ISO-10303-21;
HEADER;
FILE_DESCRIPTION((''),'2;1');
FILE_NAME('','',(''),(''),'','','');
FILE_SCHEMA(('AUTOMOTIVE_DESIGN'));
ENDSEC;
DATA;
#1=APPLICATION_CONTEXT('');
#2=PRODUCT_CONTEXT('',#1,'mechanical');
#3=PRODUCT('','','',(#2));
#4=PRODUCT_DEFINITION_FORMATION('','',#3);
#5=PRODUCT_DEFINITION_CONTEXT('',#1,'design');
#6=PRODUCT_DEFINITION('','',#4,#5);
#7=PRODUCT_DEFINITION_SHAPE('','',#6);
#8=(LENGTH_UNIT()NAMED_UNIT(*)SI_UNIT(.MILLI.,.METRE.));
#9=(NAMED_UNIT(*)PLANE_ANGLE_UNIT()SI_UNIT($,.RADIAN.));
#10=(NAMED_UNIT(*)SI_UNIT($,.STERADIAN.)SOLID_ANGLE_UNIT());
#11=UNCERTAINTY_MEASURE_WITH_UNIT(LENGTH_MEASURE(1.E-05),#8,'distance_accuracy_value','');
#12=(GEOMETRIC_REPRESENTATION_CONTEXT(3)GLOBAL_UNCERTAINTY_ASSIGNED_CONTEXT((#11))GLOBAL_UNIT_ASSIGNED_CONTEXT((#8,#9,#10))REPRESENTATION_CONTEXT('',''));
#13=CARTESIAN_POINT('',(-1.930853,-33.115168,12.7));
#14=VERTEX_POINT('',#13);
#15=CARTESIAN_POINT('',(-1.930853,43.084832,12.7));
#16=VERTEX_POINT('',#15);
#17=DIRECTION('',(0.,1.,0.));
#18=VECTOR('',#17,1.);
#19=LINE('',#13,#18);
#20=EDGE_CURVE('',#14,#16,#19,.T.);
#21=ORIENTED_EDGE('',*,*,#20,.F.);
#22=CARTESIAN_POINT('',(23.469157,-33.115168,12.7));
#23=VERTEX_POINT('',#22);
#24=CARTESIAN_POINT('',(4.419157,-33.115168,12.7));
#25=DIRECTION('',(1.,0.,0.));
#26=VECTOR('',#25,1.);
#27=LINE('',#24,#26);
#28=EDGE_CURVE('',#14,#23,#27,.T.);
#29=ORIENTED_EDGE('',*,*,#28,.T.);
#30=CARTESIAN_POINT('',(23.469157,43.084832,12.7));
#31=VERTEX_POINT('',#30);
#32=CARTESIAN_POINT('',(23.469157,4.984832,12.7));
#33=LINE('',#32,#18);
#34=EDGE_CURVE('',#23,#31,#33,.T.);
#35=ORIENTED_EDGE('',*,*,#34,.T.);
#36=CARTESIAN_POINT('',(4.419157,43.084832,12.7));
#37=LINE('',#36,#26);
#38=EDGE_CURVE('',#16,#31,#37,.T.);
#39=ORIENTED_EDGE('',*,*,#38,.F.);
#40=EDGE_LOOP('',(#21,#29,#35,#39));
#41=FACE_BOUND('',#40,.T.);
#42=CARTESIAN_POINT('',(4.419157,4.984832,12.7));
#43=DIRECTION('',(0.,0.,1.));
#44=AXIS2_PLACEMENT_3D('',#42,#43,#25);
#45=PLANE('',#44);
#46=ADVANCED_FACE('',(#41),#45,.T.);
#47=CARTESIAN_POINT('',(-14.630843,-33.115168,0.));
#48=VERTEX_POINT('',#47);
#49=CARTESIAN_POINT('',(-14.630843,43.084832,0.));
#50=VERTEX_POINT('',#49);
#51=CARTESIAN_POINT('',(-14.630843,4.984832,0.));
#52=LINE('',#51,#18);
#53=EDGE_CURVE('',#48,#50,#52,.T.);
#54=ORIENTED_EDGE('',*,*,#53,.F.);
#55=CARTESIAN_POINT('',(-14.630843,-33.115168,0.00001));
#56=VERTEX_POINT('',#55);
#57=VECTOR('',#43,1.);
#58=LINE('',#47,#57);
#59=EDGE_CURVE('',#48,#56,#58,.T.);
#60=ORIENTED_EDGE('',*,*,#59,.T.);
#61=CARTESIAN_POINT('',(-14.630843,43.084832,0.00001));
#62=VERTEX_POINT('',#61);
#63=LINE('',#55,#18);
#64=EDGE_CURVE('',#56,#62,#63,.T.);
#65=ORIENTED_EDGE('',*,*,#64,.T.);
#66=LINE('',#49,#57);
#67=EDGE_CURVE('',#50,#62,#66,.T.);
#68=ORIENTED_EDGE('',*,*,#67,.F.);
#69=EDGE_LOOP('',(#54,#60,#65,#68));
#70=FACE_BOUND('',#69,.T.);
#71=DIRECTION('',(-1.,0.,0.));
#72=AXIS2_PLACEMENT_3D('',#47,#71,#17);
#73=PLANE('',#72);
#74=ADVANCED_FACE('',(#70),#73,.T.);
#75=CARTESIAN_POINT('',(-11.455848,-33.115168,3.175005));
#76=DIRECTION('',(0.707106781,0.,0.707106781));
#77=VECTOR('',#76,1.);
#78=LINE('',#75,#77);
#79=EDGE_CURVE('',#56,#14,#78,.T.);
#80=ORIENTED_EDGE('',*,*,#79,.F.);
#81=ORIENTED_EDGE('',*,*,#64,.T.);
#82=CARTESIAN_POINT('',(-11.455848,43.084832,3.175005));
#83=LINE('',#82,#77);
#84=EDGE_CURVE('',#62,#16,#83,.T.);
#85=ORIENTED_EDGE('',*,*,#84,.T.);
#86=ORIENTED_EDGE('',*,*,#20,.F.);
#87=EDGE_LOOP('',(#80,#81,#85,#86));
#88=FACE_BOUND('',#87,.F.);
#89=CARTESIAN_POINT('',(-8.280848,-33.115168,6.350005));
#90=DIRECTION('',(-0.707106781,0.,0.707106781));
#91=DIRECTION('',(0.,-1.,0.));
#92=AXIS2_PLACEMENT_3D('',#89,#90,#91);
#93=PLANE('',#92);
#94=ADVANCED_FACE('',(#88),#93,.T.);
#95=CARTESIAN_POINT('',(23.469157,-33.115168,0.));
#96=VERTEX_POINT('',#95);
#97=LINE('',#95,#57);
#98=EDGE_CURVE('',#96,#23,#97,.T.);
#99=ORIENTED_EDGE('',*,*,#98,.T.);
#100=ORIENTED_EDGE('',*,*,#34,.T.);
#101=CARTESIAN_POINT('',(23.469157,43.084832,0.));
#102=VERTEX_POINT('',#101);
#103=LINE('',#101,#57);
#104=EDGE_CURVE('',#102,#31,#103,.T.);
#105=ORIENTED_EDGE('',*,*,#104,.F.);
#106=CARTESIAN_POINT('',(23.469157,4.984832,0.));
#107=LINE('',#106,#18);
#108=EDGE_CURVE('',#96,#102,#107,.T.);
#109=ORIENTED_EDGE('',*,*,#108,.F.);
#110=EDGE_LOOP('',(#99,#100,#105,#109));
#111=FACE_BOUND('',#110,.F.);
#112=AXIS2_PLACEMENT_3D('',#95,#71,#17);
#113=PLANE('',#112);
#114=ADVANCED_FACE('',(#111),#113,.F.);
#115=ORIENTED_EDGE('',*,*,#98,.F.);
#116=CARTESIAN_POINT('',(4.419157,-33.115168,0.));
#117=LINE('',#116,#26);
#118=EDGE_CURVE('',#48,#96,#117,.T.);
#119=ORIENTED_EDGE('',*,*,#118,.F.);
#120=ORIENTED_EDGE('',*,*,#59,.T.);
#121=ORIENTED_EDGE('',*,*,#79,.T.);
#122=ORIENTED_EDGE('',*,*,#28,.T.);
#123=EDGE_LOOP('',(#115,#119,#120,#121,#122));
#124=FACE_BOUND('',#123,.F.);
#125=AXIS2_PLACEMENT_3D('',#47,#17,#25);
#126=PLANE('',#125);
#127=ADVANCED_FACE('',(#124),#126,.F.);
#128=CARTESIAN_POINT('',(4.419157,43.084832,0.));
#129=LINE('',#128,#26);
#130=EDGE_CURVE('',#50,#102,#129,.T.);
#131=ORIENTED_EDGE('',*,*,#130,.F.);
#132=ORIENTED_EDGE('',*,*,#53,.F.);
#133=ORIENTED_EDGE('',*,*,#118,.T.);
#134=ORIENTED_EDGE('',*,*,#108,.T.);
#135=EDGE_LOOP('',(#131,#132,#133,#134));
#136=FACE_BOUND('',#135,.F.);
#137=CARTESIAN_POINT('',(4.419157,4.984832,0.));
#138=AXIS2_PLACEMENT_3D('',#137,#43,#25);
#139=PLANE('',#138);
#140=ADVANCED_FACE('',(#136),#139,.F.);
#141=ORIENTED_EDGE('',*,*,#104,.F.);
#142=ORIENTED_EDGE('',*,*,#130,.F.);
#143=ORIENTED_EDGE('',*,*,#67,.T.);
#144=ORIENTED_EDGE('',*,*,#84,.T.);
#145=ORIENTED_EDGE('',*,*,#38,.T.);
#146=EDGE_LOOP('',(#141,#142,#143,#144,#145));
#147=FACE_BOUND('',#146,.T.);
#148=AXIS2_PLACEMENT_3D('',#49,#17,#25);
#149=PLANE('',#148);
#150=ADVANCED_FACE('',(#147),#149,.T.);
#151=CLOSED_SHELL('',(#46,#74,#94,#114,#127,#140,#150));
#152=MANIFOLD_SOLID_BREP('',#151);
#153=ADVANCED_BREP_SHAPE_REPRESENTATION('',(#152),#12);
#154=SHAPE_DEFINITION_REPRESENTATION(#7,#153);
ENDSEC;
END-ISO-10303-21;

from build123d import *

# Parameters (mm, degrees)
F0_W     = 38.1
F0_H     = 76.2
F1_DEPTH = 12.7
F2_SIZE2 = 12.69999
F2_SIZE  = 12.69999


# Not quite as in the source:
# - a fillet or chamfer is up to 0.001 mm smaller than in the source, because OpenCascade refuses the exact size


with BuildPart() as f1:
    # F0 (on Top) → F1 (new body)
    with BuildSketch(Plane.XY):
        with Locations((4.4191572815, 4.9848316369)):
            Rectangle(F0_W, F0_H)
    extrude(amount=F1_DEPTH)

    # F2 (size 12.7 and 12.7 in the source; OpenCascade refuses exactly that, so slightly less here)
    f2_edges = [f1.edges().sort_by_distance(p)[0] for p in [
        (-14.630843, 4.984832, 12.7),
    ]]
    chamfer(f2_edges, length=F2_SIZE, length2=F2_SIZE2)


solid = f1.part
